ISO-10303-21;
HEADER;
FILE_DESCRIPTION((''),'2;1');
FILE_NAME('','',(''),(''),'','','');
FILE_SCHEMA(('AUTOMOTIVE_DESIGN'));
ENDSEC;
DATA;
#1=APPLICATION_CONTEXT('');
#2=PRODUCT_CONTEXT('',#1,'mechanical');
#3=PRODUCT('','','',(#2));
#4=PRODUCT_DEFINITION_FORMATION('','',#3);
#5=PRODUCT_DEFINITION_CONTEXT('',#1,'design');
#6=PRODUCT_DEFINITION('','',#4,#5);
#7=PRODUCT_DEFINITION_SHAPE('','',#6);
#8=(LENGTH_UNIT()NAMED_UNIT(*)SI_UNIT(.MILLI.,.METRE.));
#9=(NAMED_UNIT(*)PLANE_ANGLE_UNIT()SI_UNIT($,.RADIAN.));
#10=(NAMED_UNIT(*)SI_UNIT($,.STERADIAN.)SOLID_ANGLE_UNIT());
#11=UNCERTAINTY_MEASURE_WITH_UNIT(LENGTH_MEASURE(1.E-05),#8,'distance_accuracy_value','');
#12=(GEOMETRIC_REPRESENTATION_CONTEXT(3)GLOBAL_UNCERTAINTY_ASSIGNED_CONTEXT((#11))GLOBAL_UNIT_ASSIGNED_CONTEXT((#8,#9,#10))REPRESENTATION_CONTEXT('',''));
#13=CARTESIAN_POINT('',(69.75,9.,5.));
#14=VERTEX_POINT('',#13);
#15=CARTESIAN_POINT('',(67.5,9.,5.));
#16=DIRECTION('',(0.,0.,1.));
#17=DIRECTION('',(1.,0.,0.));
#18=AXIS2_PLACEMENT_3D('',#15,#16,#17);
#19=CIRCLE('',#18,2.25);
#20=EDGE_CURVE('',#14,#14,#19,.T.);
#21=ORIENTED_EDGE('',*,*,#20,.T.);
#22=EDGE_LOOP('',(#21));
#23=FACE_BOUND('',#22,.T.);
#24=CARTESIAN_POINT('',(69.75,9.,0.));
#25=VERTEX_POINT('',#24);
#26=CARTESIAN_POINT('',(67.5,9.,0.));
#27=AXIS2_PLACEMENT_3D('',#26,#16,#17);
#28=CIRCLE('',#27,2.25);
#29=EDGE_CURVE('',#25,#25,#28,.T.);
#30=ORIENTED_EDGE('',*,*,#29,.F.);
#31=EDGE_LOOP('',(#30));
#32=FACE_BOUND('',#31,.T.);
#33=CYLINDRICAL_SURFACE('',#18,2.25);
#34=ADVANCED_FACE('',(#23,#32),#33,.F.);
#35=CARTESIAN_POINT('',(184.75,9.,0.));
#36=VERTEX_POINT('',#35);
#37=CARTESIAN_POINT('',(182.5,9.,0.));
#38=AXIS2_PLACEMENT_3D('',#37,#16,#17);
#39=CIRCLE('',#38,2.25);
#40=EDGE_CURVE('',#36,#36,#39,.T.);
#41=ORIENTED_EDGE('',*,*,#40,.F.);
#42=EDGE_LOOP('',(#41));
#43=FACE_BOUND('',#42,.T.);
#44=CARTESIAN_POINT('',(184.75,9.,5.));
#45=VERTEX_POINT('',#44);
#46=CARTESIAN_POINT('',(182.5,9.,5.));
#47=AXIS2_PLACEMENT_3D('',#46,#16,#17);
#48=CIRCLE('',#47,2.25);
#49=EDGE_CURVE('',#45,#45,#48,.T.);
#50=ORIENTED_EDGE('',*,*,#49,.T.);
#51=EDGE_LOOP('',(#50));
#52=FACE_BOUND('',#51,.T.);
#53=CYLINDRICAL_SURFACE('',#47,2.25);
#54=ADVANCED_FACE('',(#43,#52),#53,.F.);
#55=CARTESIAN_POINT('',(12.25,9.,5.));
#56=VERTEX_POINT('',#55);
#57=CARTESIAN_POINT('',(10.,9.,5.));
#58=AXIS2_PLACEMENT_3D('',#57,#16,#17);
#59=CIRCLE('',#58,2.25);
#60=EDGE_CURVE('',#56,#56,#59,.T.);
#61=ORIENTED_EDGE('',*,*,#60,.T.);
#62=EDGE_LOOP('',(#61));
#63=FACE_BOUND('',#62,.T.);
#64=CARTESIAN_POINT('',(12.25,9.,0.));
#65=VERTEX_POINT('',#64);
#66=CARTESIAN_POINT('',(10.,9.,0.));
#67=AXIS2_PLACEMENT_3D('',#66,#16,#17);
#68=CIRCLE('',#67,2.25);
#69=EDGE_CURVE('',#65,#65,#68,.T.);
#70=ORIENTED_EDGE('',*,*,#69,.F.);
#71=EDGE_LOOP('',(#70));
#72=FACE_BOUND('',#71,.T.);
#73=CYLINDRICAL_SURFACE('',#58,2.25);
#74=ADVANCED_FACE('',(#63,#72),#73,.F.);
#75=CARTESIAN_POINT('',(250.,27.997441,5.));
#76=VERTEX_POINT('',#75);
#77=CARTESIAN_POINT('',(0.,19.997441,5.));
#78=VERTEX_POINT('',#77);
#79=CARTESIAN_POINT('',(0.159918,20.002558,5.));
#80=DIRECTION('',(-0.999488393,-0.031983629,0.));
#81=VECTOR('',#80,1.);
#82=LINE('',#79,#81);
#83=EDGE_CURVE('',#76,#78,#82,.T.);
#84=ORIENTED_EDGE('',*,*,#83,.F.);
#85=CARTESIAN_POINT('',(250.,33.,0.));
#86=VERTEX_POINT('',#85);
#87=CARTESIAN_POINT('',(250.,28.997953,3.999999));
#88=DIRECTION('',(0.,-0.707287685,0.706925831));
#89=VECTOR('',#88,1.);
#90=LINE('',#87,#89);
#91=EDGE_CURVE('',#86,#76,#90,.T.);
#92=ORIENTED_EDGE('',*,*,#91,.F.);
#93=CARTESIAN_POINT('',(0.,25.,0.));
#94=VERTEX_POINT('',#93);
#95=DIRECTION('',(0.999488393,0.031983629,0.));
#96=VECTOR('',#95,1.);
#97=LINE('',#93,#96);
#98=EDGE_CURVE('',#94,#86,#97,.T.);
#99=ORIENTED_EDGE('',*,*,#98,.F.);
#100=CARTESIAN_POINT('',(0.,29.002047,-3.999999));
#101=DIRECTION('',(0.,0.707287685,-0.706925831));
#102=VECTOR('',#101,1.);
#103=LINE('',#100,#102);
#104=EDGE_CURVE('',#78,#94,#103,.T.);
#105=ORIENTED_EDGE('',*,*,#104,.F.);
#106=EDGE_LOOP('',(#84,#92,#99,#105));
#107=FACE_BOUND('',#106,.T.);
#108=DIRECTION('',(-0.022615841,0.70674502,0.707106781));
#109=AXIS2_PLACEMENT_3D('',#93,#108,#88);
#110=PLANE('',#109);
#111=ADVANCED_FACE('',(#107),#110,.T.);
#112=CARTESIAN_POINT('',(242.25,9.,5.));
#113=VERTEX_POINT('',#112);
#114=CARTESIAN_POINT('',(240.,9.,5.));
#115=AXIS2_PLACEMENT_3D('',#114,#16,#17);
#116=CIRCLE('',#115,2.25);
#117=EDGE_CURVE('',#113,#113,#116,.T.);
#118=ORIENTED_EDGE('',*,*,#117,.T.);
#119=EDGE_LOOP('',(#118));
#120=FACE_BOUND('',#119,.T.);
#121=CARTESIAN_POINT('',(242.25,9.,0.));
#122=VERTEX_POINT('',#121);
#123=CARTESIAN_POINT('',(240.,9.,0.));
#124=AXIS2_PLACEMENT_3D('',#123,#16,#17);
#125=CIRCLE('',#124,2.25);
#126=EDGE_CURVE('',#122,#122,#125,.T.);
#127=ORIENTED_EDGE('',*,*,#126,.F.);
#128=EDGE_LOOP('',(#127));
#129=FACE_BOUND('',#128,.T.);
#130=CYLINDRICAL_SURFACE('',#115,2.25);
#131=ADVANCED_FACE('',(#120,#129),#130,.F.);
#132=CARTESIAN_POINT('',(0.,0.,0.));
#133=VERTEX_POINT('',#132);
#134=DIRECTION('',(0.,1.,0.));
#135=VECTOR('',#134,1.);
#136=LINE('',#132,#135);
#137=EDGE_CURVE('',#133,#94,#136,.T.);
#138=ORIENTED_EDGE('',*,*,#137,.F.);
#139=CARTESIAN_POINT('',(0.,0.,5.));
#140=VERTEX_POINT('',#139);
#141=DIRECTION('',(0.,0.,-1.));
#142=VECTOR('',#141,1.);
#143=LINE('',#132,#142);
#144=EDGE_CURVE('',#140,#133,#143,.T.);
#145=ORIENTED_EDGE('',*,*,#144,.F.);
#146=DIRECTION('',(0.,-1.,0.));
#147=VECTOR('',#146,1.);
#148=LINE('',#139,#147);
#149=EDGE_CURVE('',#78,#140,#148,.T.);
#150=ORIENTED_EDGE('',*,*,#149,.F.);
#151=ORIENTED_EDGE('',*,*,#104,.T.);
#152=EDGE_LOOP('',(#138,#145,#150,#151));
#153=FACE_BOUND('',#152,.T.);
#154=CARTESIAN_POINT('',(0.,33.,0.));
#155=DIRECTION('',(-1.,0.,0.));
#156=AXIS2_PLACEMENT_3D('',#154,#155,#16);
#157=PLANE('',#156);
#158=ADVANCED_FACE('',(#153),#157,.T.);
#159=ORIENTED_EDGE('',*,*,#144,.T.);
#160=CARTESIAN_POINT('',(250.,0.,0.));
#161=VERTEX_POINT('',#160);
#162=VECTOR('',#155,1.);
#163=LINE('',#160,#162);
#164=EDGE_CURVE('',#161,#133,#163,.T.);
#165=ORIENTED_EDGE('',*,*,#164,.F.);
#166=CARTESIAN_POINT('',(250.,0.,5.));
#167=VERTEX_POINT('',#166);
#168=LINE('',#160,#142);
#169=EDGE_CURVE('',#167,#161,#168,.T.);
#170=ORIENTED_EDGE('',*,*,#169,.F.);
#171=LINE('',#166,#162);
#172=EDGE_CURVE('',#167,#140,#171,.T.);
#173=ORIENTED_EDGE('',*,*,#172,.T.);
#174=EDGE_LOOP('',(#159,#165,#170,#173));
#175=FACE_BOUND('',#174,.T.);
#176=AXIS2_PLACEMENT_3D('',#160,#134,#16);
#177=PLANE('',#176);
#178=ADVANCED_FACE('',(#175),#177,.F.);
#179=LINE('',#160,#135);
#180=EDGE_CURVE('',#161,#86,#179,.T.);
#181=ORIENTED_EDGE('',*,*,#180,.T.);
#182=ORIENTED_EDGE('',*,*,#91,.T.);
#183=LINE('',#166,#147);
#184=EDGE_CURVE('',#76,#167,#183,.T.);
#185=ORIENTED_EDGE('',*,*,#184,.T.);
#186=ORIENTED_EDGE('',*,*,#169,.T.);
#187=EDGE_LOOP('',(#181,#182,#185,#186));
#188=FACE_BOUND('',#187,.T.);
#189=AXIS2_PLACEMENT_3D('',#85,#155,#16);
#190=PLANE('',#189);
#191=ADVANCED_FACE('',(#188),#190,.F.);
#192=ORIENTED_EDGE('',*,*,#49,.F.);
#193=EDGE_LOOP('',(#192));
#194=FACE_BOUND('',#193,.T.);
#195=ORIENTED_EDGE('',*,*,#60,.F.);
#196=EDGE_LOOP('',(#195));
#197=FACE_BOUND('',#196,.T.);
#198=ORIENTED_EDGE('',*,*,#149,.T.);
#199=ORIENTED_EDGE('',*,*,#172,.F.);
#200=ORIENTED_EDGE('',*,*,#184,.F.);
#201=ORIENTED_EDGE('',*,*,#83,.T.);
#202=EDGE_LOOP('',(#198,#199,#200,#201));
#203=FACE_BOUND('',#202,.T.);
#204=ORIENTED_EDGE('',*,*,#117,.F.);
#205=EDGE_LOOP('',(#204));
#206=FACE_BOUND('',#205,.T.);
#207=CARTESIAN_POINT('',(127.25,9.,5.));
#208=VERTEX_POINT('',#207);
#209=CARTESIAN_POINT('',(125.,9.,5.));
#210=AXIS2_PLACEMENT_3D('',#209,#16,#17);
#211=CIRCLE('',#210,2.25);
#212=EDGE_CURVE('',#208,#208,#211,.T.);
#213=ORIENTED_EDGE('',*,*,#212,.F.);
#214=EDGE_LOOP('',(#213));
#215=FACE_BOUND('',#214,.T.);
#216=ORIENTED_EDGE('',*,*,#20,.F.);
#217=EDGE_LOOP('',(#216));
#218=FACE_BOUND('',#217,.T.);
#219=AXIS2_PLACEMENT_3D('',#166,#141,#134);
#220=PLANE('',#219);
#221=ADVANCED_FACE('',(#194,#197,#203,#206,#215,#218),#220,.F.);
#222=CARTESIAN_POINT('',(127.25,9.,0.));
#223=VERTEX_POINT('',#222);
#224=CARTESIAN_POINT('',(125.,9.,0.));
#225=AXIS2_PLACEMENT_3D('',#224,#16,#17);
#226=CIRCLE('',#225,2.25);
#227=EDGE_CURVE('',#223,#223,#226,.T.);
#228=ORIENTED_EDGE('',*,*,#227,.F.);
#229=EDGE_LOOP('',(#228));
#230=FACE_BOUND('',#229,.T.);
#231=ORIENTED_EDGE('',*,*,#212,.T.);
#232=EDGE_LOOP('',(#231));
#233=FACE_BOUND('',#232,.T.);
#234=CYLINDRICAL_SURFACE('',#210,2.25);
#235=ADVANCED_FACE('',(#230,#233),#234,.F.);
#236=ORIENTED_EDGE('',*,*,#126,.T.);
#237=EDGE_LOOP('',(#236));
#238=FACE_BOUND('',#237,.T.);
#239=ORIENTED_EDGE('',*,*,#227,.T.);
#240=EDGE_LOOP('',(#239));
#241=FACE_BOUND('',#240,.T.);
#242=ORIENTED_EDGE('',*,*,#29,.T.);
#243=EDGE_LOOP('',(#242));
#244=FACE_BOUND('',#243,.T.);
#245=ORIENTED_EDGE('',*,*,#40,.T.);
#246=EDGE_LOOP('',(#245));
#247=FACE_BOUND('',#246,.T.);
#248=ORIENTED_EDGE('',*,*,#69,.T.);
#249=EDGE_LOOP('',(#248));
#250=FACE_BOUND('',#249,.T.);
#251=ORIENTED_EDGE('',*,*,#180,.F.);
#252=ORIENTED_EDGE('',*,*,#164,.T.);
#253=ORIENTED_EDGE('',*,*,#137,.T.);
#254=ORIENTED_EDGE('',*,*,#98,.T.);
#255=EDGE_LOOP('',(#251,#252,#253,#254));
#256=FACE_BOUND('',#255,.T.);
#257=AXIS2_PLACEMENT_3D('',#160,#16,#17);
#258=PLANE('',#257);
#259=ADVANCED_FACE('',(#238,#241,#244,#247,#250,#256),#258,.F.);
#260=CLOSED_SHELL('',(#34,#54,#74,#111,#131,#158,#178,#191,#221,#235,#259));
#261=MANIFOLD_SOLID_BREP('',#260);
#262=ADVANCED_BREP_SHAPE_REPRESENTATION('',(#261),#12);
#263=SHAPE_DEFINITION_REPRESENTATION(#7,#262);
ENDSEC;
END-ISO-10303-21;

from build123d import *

# Parameters (mm, degrees)
SKETCH1_W            = 5
SKETCH1_H            = 33
BOSS_EXTRUDE1_DEPTH  = 250
CUT_EXTRUDE1_DEPTH   = 253.218159537
CHAMFER1_SIZE        = 5
M4_CLEARANCE_HOLE1_D = 4.5
LPATTERN1_COUNT      = 5
LPATTERN1_PITCH      = 57.5


with BuildPart() as part:
    # Sketch1 → Boss-Extrude1 (new body)
    with BuildSketch(Plane(origin=(0, 0, 0), x_dir=(0, 0, -1), z_dir=(1, 0, 0))):
        with Locations((-2.5, 16.5)):
            Rectangle(SKETCH1_W, SKETCH1_H)
    extrude(amount=BOSS_EXTRUDE1_DEPTH)

    # Sketch2 → Cut-Extrude1 (cut, through all)
    with BuildSketch(Plane.XY):
        Polygon((0, 33), (0, 25), (250, 33), align=None)
    extrude(amount=CUT_EXTRUDE1_DEPTH, mode=Mode.SUBTRACT)

    # Chamfer1
    chamfer1_edges = [part.edges().sort_by_distance(p)[0] for p in [
        (125, 29, 5),
    ]]
    chamfer(chamfer1_edges, length=CHAMFER1_SIZE - 0.0001)  # a hair under: the kernel refuses the full size

    # M4 Clearance Hole1 (through all)
    with Locations(Plane.XY.offset(5)):
        with Locations((240, 9)):
            m4_clearance_hole1 = Hole(M4_CLEARANCE_HOLE1_D / 2)

    # LPattern1: M4 Clearance Hole1 ×5
    with Locations(*[(-i * LPATTERN1_PITCH, 0, 0) for i in range(1, LPATTERN1_COUNT)]):
        add(m4_clearance_hole1, mode=Mode.SUBTRACT)


solid = part.part
